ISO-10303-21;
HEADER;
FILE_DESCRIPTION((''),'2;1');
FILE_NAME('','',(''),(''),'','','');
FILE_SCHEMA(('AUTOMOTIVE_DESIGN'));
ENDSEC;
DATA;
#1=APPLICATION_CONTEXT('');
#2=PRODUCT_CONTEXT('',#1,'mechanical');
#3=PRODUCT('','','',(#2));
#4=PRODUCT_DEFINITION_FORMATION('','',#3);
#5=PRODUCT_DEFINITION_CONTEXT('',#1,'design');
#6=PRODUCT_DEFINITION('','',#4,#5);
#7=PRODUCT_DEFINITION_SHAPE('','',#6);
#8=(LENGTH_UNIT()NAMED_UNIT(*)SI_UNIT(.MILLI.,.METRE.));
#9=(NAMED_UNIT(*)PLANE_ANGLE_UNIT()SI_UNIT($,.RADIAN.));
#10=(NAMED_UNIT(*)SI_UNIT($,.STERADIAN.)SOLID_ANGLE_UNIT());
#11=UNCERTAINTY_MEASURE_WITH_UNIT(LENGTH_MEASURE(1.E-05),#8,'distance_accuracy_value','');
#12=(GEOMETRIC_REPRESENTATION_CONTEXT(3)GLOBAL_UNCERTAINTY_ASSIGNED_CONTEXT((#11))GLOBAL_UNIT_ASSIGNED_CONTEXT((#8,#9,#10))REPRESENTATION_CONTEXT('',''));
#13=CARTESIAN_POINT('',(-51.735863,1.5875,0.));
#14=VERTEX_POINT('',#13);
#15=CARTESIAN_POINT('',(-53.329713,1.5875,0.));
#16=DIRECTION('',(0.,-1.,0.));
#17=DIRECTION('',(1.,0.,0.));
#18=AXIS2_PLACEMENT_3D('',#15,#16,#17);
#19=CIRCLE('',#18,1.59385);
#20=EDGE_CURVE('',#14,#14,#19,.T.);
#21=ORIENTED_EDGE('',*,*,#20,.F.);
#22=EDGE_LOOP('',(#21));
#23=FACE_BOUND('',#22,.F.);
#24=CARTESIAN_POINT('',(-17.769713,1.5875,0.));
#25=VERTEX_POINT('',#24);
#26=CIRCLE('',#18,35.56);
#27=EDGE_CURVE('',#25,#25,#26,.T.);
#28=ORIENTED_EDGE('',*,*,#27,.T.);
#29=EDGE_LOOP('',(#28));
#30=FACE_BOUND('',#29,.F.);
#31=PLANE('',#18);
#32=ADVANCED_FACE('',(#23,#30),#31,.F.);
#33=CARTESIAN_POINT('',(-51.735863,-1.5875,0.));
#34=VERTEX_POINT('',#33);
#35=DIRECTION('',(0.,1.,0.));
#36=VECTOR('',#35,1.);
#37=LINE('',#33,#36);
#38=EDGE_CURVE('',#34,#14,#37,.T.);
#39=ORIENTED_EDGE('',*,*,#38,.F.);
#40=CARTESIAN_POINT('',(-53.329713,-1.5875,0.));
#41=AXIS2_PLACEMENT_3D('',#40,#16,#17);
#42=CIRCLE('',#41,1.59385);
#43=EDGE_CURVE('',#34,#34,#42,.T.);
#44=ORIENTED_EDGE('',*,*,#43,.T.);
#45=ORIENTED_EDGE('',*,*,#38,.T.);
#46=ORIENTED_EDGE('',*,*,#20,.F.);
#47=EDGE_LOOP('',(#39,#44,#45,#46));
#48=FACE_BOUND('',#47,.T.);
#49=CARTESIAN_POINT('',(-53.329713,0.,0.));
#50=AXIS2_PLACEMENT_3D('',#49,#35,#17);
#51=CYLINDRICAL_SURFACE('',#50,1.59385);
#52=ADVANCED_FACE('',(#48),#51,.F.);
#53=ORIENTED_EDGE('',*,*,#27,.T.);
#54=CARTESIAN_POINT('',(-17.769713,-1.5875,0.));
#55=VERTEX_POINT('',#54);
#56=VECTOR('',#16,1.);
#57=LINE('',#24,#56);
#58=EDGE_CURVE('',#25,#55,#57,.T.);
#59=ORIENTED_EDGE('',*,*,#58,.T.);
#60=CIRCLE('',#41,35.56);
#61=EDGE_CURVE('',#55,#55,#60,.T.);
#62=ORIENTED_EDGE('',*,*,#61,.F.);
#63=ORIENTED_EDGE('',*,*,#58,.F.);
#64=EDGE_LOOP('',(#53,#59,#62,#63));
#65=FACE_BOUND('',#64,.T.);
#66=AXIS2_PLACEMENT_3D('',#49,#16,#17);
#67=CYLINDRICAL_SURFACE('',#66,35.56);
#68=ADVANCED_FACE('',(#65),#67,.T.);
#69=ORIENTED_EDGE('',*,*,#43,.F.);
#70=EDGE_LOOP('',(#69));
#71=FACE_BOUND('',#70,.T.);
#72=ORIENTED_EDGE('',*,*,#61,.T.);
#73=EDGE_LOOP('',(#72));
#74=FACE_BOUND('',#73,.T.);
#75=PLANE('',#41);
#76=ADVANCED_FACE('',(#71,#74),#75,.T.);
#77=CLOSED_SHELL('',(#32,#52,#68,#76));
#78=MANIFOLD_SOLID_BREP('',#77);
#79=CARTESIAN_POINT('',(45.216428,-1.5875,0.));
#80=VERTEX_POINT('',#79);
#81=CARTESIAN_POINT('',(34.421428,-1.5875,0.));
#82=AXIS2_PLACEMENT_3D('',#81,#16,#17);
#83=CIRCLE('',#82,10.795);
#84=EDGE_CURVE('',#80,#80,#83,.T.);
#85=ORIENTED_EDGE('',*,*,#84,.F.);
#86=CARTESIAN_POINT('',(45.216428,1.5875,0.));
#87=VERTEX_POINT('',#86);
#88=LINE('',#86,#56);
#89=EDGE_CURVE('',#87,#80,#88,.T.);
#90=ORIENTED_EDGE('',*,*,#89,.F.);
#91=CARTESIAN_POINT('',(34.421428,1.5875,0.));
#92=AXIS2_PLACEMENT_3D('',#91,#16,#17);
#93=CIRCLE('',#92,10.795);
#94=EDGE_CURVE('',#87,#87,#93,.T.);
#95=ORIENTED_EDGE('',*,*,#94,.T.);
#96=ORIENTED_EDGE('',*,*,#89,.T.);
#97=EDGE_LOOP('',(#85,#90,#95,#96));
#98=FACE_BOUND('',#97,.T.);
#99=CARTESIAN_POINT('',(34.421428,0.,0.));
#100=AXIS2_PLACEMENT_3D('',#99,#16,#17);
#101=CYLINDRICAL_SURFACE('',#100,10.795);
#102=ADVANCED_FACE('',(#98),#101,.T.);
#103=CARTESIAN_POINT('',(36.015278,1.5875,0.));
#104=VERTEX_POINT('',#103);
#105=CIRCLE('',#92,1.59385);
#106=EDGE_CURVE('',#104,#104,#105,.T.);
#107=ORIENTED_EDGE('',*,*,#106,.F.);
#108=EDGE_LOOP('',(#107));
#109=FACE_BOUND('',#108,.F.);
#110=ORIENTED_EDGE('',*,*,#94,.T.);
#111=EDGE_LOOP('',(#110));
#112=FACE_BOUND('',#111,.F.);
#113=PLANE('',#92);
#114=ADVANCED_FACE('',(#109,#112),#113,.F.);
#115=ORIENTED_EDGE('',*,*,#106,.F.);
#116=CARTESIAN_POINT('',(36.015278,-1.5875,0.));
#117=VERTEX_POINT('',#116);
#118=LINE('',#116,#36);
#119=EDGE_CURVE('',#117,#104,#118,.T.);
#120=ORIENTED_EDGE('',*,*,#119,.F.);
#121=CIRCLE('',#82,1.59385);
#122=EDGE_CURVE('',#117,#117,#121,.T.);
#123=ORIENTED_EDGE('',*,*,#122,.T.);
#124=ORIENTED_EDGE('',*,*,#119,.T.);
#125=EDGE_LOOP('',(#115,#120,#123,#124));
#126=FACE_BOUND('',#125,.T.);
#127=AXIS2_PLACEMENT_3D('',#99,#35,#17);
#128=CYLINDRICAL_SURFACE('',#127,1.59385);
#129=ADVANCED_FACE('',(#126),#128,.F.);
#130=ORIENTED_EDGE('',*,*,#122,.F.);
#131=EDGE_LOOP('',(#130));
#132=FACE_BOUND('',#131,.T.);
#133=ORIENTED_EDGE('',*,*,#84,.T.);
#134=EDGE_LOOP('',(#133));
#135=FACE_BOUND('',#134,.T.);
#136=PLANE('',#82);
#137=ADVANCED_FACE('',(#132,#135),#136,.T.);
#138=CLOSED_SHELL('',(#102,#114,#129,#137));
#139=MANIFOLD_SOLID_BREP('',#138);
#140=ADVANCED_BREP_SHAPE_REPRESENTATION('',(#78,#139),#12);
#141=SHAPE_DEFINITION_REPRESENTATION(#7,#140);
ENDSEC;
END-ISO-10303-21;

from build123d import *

# Parameters (mm, degrees)
F0_R     = 35.56
F0_R_2   = 1.59385
F1_DEPTH = 1.5875
F0_R_3   = 10.795


# Not quite as in the source:
# - a length typed as a fraction of an inch, garbled in the dataset ("3 / 203.2 mm" for 3/8 in), is restored


with BuildPart() as f1:
    # F0 (on Front) → F1 (new body, symmetric)
    with BuildSketch(Plane.XZ):
        with Locations((-53.3297125294, 0)):
            Circle(F0_R)
        with Locations((-53.3297125294, 0)):
            Circle(F0_R_2, mode=Mode.SUBTRACT)
    extrude(amount=F1_DEPTH, both=True)


with BuildPart() as f1b:
    # F0 (on Front) → F1, piece 2 (new body, symmetric)
    with BuildSketch(Plane.XZ):
        with Locations((34.4214282293, 0)):
            Circle(F0_R_3)
        with Locations((34.4214282293, 0)):
            Circle(F0_R_2, mode=Mode.SUBTRACT)
    extrude(amount=F1_DEPTH, both=True)


solid = Compound([f1.part, f1b.part])
